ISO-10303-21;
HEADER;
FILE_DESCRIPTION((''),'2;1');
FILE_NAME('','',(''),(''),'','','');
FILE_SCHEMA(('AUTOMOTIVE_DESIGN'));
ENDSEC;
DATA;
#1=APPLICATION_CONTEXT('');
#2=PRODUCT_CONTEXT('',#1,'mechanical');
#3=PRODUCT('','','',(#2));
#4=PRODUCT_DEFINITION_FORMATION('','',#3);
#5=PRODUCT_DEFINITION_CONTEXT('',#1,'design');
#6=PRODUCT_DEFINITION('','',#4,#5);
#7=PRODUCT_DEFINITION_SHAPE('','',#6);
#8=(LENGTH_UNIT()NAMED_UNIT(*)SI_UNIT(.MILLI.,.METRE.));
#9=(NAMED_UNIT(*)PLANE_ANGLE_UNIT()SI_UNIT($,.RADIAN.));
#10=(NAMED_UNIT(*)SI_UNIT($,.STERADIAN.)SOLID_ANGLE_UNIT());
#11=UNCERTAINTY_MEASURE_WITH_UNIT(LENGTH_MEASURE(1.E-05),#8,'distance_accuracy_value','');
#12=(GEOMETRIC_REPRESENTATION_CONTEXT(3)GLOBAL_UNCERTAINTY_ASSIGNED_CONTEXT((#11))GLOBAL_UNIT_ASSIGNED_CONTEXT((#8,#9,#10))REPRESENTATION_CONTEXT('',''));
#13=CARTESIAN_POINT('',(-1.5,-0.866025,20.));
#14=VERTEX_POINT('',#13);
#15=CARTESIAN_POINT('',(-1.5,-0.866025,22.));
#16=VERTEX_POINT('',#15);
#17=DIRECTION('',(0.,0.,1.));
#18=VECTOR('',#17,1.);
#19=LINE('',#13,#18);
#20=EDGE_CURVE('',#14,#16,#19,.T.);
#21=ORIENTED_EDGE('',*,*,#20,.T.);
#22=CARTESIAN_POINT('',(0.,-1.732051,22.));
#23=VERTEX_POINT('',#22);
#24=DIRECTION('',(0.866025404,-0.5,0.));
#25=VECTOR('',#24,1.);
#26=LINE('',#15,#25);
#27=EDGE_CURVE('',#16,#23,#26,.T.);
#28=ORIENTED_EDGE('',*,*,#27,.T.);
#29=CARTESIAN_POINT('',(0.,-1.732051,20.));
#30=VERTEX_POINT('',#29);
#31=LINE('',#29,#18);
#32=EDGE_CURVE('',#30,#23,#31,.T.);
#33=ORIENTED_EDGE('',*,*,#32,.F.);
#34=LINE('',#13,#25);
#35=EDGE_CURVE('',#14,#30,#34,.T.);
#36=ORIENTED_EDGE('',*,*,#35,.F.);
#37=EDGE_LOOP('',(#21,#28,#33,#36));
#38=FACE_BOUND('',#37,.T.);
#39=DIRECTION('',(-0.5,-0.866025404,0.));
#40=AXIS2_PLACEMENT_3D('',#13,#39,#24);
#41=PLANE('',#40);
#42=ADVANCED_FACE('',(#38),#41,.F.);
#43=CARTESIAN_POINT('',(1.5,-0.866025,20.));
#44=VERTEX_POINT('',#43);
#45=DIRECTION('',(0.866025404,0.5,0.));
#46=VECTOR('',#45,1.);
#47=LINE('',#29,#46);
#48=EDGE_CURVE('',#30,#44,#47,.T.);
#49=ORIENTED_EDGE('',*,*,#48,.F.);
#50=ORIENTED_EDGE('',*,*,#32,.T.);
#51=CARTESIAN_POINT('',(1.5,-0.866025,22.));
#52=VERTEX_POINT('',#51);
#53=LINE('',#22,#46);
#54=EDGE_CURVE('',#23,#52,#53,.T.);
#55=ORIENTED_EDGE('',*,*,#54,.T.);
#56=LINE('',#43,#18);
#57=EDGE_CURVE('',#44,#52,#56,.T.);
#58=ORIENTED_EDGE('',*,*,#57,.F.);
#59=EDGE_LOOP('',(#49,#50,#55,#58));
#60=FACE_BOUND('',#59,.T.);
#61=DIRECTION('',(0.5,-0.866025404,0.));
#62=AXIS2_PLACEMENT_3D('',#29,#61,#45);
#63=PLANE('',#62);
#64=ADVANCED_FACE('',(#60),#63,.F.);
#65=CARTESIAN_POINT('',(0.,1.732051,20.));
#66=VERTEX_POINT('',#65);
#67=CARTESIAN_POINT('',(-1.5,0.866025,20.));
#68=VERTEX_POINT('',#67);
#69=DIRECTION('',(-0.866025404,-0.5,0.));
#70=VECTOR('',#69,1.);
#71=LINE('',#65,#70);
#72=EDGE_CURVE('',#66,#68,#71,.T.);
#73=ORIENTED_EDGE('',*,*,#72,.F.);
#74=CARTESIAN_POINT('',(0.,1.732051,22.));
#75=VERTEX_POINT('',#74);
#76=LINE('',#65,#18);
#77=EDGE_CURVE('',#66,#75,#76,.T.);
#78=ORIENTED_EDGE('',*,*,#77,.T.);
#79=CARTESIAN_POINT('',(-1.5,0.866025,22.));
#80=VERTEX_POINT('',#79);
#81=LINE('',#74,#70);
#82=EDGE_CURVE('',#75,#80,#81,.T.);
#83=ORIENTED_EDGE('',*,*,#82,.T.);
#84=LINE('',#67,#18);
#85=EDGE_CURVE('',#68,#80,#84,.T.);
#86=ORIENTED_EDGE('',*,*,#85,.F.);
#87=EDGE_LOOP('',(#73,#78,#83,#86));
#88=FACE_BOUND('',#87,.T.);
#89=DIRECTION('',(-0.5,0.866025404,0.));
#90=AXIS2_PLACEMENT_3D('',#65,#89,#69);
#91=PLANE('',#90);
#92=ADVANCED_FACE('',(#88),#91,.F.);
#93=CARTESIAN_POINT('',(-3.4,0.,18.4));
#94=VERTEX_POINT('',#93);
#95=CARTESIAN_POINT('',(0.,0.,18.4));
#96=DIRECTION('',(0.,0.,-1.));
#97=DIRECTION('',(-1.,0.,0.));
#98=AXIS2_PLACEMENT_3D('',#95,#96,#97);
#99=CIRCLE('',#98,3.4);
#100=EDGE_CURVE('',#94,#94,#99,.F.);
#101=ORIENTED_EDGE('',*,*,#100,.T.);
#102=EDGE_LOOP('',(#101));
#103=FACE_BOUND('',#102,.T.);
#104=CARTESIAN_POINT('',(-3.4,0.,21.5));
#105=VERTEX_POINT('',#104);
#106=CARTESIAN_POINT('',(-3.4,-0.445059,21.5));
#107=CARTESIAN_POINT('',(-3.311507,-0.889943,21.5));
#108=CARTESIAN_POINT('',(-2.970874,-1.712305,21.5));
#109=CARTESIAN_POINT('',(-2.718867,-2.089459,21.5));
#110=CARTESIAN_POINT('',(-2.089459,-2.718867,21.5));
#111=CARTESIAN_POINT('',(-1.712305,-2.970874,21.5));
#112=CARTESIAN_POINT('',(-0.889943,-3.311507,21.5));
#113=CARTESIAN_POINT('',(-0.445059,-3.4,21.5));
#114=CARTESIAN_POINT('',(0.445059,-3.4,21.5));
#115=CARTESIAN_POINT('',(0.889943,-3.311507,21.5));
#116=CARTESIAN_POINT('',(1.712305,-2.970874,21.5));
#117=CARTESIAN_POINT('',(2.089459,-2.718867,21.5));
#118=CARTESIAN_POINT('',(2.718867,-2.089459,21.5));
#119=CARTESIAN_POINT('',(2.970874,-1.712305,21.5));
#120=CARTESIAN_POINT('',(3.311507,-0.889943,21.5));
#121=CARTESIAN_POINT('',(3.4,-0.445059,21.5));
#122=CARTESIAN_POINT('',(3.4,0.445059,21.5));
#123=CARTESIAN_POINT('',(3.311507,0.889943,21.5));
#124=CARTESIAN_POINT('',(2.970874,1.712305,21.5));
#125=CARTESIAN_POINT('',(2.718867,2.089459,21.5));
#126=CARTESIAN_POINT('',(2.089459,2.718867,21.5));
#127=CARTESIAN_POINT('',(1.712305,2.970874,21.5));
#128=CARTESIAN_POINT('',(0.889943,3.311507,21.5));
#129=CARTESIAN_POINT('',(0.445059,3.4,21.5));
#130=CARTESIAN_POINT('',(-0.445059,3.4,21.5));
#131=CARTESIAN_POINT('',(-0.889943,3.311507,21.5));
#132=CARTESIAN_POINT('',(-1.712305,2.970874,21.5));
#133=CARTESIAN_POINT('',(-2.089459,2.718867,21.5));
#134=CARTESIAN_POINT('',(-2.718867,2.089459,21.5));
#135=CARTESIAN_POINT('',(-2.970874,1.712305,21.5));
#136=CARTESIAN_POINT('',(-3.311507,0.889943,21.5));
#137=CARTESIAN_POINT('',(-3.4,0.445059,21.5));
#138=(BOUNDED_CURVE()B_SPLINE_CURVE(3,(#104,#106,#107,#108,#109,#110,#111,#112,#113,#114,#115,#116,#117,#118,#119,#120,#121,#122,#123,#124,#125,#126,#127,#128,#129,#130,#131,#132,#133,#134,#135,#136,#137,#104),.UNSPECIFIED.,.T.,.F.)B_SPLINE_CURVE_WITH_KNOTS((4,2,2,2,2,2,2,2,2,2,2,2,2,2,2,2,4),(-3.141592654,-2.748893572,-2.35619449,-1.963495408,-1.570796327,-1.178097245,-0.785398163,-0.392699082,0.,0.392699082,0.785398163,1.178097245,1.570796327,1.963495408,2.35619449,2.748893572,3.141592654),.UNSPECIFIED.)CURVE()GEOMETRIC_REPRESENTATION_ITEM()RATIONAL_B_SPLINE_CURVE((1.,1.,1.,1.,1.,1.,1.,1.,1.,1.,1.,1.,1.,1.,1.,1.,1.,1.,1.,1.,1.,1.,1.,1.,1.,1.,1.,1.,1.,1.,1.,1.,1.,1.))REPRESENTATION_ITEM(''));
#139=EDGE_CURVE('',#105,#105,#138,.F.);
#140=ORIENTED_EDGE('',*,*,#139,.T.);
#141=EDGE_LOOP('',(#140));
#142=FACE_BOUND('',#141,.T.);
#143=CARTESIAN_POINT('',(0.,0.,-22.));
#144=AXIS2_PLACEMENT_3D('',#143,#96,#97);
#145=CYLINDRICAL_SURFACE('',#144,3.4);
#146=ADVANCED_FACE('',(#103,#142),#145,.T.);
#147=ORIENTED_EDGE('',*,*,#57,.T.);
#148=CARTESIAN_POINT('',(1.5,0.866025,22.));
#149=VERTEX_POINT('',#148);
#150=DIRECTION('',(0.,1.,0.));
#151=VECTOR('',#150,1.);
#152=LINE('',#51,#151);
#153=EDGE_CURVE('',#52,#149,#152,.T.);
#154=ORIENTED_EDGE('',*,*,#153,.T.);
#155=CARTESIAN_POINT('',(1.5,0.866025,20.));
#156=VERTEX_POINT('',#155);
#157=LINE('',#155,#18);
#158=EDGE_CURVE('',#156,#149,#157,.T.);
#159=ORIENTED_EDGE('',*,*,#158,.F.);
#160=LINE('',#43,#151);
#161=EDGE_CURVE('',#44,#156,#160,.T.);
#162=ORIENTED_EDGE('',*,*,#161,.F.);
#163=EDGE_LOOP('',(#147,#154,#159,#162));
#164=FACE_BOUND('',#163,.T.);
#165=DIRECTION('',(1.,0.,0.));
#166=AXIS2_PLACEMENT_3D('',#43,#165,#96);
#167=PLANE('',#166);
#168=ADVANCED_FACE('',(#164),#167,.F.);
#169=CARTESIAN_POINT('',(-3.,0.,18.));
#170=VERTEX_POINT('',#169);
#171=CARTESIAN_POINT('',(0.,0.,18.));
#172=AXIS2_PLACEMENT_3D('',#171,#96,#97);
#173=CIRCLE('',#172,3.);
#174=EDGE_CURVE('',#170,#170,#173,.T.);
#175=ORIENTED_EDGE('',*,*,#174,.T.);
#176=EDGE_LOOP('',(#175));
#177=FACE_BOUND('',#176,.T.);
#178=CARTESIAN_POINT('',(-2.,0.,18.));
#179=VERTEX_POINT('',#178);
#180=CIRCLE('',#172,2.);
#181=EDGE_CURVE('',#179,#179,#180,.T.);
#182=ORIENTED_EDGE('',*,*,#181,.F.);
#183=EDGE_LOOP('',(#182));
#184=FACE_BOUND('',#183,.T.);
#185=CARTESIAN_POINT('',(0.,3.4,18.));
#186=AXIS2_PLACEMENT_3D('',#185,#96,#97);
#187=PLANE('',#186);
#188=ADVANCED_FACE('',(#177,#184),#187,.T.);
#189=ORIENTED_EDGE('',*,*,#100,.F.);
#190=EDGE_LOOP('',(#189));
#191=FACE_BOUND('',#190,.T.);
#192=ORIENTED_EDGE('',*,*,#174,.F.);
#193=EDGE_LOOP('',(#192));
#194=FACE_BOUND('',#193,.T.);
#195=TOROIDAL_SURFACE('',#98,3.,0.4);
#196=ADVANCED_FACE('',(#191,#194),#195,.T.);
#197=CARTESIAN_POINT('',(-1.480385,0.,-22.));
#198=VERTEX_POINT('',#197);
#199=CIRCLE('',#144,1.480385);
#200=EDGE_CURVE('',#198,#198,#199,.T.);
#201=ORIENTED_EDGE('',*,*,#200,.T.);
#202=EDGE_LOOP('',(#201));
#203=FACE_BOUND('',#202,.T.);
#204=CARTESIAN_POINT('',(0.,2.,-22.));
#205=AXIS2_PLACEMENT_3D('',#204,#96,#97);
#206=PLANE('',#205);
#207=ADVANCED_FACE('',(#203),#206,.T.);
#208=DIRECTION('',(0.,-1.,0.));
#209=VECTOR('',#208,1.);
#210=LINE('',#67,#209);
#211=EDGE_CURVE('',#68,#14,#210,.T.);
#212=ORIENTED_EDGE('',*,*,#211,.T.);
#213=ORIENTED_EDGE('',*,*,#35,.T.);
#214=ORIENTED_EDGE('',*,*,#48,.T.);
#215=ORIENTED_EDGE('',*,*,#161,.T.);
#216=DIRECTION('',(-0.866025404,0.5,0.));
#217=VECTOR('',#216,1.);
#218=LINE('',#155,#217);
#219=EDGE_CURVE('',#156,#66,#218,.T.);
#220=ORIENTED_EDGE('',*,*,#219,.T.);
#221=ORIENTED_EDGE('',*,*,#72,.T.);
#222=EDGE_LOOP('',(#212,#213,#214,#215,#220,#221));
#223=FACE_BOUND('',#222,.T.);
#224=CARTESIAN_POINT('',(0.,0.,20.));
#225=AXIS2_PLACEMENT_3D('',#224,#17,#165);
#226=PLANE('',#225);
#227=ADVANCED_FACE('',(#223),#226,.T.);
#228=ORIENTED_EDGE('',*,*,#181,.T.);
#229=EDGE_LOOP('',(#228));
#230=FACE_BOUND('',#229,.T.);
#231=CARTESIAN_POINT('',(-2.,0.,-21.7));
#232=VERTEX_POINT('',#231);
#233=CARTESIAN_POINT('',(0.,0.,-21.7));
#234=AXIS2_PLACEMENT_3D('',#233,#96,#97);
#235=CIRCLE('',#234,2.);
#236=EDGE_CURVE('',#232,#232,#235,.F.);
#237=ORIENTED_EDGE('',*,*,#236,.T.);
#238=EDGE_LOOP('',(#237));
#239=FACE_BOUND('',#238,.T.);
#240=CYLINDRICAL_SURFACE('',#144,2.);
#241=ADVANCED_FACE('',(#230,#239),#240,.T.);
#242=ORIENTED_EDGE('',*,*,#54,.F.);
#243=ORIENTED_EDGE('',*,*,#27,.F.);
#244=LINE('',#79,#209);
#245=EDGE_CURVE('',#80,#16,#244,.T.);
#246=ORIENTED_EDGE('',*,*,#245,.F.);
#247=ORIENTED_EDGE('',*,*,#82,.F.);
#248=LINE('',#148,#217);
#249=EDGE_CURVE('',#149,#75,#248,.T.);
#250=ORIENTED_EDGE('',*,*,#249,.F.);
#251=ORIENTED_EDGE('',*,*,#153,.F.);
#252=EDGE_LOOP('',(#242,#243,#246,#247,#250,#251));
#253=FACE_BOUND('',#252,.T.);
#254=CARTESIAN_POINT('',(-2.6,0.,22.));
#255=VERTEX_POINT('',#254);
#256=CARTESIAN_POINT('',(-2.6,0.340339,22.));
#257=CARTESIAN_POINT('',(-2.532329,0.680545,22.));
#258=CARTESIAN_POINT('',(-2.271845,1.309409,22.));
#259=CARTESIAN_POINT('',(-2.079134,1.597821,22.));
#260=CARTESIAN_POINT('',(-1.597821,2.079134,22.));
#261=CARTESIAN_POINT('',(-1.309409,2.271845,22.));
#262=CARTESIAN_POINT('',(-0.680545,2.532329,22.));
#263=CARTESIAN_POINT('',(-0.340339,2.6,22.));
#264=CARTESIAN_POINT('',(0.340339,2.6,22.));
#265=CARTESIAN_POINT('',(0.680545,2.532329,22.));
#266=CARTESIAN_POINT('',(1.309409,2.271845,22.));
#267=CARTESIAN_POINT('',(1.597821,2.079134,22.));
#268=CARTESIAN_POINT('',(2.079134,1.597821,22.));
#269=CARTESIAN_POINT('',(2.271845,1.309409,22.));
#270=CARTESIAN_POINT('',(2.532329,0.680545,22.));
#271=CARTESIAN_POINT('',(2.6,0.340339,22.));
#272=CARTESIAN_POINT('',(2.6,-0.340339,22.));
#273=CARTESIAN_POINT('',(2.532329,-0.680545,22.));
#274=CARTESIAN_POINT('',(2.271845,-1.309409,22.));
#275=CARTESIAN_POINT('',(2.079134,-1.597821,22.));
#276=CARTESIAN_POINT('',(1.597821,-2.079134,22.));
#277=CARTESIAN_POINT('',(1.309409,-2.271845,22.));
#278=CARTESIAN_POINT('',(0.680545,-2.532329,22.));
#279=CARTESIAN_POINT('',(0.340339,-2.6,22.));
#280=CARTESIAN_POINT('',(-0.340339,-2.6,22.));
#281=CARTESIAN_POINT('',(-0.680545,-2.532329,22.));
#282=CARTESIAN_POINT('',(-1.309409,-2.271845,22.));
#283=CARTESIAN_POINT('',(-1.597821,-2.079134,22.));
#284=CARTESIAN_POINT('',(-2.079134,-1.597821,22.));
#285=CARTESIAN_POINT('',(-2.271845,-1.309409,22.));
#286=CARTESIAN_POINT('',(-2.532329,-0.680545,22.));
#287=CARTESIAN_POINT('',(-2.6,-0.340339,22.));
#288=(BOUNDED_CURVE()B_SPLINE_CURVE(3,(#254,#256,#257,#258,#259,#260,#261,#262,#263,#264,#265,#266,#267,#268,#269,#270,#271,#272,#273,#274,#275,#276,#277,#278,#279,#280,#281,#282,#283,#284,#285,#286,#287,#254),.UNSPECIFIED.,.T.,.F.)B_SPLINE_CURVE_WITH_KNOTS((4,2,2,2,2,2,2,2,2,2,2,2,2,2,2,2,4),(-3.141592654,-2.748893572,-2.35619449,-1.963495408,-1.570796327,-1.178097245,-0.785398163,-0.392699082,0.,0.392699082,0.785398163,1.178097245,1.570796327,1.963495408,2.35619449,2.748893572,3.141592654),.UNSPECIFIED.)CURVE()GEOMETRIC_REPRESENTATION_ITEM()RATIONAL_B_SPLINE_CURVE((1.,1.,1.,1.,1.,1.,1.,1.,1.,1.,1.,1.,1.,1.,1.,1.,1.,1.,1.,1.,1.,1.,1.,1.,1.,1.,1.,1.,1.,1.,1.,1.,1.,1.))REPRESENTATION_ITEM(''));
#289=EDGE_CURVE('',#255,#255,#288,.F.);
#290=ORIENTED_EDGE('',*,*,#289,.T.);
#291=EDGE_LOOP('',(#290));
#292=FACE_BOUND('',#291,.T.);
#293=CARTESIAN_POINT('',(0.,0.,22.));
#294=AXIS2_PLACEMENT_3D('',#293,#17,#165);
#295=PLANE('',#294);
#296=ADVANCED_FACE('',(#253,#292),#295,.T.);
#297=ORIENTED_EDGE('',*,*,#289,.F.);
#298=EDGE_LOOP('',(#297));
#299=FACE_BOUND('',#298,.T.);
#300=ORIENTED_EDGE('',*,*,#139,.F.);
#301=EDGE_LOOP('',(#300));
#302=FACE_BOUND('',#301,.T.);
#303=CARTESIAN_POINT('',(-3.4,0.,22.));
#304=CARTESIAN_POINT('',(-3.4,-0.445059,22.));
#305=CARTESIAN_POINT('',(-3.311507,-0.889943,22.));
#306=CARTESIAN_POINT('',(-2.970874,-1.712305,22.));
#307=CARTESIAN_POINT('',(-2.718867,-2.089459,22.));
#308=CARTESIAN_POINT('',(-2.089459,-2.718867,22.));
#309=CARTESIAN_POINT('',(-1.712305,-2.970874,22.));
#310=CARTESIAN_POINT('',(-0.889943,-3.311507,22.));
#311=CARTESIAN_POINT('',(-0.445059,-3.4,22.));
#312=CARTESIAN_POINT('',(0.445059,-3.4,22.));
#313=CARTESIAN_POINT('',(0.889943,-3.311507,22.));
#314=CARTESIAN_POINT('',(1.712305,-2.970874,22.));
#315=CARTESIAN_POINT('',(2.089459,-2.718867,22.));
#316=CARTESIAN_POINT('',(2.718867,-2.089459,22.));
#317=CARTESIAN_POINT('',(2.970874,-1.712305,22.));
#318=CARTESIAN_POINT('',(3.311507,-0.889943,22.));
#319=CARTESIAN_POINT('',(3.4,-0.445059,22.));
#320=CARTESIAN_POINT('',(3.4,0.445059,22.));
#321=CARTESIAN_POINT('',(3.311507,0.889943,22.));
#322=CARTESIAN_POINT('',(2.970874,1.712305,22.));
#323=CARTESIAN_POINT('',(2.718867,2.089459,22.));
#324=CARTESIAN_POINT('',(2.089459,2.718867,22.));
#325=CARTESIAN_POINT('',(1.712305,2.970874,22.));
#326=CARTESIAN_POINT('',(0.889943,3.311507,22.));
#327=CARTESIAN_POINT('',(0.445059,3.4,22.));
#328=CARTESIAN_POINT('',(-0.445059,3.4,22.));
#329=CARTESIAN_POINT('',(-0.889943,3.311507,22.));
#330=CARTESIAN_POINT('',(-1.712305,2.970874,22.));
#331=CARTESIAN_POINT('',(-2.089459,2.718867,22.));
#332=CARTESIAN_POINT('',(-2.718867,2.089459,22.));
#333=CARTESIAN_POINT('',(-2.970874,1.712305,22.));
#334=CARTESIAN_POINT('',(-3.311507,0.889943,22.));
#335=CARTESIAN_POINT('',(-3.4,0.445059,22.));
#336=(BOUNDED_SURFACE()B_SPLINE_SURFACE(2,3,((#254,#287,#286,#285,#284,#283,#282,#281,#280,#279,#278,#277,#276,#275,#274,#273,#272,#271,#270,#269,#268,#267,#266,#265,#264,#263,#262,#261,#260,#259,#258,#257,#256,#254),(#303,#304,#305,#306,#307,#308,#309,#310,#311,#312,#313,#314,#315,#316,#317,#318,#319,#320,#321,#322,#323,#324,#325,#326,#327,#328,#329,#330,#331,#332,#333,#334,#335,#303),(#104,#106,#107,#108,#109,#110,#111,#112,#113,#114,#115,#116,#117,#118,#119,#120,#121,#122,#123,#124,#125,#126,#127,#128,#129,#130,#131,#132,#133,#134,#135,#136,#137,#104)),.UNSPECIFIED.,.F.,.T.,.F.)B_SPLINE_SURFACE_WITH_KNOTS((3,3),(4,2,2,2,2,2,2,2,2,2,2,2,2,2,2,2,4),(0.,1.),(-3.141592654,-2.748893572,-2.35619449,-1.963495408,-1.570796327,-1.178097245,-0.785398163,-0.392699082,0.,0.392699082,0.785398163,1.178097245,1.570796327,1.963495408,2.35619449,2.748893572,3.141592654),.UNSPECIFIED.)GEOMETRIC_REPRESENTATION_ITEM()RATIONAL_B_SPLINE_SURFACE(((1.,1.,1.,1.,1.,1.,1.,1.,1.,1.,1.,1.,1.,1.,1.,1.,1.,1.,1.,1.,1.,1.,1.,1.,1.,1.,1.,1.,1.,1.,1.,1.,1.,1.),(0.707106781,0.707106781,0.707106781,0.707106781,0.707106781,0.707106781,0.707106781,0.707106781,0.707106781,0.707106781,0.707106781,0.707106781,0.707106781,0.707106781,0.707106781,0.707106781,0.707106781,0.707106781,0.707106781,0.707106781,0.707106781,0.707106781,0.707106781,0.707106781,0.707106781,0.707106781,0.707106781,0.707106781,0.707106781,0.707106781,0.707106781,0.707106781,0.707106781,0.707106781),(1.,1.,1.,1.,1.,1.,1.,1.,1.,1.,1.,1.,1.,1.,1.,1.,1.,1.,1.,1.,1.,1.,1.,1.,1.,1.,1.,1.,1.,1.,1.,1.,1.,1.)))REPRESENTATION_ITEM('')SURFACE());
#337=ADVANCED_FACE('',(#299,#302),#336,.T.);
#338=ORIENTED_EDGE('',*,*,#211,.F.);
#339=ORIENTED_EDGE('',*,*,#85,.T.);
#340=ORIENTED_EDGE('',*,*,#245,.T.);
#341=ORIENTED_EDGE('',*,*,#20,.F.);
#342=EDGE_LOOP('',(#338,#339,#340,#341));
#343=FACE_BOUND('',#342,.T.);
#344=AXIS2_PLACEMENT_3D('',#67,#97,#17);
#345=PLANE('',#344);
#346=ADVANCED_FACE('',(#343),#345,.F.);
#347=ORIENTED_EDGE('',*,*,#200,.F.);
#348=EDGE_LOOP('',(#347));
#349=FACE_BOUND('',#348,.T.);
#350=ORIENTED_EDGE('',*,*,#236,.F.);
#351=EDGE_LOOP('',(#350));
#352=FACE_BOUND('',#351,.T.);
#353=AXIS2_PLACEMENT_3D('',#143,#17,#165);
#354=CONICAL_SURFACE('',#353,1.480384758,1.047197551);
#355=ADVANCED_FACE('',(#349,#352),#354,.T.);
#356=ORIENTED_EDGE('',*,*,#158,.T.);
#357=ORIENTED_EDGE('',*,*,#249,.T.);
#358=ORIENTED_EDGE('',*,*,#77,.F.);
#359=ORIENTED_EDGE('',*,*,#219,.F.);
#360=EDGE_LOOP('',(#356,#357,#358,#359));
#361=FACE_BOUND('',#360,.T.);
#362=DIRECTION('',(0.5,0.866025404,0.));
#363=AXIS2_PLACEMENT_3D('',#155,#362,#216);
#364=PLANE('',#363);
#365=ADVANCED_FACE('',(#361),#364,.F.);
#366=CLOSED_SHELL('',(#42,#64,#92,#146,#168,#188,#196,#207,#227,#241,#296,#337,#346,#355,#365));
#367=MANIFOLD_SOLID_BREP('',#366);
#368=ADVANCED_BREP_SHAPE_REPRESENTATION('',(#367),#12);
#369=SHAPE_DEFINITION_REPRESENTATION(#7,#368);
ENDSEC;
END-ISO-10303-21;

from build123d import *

# Parameters (mm, degrees)
CHAMFER_1_SIZE      = 0.3
CHAMFER_1_SIZE2     = 0.519615242
FILLET_1_R          = 0.4
FILLET_2_SIZE       = 0.5
FILLET_2_SIZE_2     = 0.8
CUT_EXTRUDE_1_DEPTH = 2


with BuildPart() as part:
    # 草图2 → 旋转1 (revolve)
    with BuildSketch(Plane(origin=(0, 0, 0), x_dir=(0, 0, -1), z_dir=(1, 0, 0)), mode=Mode.PRIVATE) as revolve_1_sk:
        Polygon((-22, 0), (-22, 3.4), (-18, 3.4), (-18, 2), (22, 2), (22, 0), align=None)
    revolve(revolve_1_sk.sketch.rotate(Axis((0, 0, -22), (0, 0, 1)), 90), axis=Axis((0, 0, -22), (0, 0, 1)))

    # 倒角1
    chamfer_1_edges = [part.edges().sort_by_distance(p)[0] for p in [
        (2, 0, -22),
    ]]
    chamfer_1_side = [part.faces().sort_by_distance(p)[0] for p in [
        (2, 0, -2),
    ]]
    chamfer(chamfer_1_edges, length=CHAMFER_1_SIZE, length2=CHAMFER_1_SIZE2, reference=chamfer_1_side[0])

    # 圆角1
    fillet_1_edges = [part.edges().sort_by_distance(p)[0] for p in [
        (3.4, 0, 18),
    ]]
    fillet(fillet_1_edges, radius=FILLET_1_R)

    # 圆角2
    # an asymmetric fillet: 0.8, 0.5 mm, written as the material it takes off along each edge
    with BuildSketch(Plane(origin=(0, 0, 22), x_dir=(-1, 0, 0), z_dir=(0, 1, 0))) as fillet_2_piece_1:
        with BuildLine():
            Bezier((3.4, -FILLET_2_SIZE), (3.4, 0), (3.4 - FILLET_2_SIZE_2, 0), weights=[1, 0.707106781, 1])
            Line((3.4 - FILLET_2_SIZE_2, 0), (3.4, 0))
            Line((3.4, 0), (3.4, -FILLET_2_SIZE))
        make_face()
    revolve(axis=Axis((0, 0, 22), (0, 0, 1)), mode=Mode.SUBTRACT)

    # 草图3 → 切除-拉伸1 (cut)
    with BuildSketch(Plane.XY.offset(22)):
        Polygon((0, 1.732050808), (-1.5, 0.866025404), (-1.5, -0.866025404), (0, -1.732050808), (1.5, -0.866025404), (1.5, 0.866025404), align=None)
    extrude(amount=-CUT_EXTRUDE_1_DEPTH, mode=Mode.SUBTRACT)


solid = part.part
